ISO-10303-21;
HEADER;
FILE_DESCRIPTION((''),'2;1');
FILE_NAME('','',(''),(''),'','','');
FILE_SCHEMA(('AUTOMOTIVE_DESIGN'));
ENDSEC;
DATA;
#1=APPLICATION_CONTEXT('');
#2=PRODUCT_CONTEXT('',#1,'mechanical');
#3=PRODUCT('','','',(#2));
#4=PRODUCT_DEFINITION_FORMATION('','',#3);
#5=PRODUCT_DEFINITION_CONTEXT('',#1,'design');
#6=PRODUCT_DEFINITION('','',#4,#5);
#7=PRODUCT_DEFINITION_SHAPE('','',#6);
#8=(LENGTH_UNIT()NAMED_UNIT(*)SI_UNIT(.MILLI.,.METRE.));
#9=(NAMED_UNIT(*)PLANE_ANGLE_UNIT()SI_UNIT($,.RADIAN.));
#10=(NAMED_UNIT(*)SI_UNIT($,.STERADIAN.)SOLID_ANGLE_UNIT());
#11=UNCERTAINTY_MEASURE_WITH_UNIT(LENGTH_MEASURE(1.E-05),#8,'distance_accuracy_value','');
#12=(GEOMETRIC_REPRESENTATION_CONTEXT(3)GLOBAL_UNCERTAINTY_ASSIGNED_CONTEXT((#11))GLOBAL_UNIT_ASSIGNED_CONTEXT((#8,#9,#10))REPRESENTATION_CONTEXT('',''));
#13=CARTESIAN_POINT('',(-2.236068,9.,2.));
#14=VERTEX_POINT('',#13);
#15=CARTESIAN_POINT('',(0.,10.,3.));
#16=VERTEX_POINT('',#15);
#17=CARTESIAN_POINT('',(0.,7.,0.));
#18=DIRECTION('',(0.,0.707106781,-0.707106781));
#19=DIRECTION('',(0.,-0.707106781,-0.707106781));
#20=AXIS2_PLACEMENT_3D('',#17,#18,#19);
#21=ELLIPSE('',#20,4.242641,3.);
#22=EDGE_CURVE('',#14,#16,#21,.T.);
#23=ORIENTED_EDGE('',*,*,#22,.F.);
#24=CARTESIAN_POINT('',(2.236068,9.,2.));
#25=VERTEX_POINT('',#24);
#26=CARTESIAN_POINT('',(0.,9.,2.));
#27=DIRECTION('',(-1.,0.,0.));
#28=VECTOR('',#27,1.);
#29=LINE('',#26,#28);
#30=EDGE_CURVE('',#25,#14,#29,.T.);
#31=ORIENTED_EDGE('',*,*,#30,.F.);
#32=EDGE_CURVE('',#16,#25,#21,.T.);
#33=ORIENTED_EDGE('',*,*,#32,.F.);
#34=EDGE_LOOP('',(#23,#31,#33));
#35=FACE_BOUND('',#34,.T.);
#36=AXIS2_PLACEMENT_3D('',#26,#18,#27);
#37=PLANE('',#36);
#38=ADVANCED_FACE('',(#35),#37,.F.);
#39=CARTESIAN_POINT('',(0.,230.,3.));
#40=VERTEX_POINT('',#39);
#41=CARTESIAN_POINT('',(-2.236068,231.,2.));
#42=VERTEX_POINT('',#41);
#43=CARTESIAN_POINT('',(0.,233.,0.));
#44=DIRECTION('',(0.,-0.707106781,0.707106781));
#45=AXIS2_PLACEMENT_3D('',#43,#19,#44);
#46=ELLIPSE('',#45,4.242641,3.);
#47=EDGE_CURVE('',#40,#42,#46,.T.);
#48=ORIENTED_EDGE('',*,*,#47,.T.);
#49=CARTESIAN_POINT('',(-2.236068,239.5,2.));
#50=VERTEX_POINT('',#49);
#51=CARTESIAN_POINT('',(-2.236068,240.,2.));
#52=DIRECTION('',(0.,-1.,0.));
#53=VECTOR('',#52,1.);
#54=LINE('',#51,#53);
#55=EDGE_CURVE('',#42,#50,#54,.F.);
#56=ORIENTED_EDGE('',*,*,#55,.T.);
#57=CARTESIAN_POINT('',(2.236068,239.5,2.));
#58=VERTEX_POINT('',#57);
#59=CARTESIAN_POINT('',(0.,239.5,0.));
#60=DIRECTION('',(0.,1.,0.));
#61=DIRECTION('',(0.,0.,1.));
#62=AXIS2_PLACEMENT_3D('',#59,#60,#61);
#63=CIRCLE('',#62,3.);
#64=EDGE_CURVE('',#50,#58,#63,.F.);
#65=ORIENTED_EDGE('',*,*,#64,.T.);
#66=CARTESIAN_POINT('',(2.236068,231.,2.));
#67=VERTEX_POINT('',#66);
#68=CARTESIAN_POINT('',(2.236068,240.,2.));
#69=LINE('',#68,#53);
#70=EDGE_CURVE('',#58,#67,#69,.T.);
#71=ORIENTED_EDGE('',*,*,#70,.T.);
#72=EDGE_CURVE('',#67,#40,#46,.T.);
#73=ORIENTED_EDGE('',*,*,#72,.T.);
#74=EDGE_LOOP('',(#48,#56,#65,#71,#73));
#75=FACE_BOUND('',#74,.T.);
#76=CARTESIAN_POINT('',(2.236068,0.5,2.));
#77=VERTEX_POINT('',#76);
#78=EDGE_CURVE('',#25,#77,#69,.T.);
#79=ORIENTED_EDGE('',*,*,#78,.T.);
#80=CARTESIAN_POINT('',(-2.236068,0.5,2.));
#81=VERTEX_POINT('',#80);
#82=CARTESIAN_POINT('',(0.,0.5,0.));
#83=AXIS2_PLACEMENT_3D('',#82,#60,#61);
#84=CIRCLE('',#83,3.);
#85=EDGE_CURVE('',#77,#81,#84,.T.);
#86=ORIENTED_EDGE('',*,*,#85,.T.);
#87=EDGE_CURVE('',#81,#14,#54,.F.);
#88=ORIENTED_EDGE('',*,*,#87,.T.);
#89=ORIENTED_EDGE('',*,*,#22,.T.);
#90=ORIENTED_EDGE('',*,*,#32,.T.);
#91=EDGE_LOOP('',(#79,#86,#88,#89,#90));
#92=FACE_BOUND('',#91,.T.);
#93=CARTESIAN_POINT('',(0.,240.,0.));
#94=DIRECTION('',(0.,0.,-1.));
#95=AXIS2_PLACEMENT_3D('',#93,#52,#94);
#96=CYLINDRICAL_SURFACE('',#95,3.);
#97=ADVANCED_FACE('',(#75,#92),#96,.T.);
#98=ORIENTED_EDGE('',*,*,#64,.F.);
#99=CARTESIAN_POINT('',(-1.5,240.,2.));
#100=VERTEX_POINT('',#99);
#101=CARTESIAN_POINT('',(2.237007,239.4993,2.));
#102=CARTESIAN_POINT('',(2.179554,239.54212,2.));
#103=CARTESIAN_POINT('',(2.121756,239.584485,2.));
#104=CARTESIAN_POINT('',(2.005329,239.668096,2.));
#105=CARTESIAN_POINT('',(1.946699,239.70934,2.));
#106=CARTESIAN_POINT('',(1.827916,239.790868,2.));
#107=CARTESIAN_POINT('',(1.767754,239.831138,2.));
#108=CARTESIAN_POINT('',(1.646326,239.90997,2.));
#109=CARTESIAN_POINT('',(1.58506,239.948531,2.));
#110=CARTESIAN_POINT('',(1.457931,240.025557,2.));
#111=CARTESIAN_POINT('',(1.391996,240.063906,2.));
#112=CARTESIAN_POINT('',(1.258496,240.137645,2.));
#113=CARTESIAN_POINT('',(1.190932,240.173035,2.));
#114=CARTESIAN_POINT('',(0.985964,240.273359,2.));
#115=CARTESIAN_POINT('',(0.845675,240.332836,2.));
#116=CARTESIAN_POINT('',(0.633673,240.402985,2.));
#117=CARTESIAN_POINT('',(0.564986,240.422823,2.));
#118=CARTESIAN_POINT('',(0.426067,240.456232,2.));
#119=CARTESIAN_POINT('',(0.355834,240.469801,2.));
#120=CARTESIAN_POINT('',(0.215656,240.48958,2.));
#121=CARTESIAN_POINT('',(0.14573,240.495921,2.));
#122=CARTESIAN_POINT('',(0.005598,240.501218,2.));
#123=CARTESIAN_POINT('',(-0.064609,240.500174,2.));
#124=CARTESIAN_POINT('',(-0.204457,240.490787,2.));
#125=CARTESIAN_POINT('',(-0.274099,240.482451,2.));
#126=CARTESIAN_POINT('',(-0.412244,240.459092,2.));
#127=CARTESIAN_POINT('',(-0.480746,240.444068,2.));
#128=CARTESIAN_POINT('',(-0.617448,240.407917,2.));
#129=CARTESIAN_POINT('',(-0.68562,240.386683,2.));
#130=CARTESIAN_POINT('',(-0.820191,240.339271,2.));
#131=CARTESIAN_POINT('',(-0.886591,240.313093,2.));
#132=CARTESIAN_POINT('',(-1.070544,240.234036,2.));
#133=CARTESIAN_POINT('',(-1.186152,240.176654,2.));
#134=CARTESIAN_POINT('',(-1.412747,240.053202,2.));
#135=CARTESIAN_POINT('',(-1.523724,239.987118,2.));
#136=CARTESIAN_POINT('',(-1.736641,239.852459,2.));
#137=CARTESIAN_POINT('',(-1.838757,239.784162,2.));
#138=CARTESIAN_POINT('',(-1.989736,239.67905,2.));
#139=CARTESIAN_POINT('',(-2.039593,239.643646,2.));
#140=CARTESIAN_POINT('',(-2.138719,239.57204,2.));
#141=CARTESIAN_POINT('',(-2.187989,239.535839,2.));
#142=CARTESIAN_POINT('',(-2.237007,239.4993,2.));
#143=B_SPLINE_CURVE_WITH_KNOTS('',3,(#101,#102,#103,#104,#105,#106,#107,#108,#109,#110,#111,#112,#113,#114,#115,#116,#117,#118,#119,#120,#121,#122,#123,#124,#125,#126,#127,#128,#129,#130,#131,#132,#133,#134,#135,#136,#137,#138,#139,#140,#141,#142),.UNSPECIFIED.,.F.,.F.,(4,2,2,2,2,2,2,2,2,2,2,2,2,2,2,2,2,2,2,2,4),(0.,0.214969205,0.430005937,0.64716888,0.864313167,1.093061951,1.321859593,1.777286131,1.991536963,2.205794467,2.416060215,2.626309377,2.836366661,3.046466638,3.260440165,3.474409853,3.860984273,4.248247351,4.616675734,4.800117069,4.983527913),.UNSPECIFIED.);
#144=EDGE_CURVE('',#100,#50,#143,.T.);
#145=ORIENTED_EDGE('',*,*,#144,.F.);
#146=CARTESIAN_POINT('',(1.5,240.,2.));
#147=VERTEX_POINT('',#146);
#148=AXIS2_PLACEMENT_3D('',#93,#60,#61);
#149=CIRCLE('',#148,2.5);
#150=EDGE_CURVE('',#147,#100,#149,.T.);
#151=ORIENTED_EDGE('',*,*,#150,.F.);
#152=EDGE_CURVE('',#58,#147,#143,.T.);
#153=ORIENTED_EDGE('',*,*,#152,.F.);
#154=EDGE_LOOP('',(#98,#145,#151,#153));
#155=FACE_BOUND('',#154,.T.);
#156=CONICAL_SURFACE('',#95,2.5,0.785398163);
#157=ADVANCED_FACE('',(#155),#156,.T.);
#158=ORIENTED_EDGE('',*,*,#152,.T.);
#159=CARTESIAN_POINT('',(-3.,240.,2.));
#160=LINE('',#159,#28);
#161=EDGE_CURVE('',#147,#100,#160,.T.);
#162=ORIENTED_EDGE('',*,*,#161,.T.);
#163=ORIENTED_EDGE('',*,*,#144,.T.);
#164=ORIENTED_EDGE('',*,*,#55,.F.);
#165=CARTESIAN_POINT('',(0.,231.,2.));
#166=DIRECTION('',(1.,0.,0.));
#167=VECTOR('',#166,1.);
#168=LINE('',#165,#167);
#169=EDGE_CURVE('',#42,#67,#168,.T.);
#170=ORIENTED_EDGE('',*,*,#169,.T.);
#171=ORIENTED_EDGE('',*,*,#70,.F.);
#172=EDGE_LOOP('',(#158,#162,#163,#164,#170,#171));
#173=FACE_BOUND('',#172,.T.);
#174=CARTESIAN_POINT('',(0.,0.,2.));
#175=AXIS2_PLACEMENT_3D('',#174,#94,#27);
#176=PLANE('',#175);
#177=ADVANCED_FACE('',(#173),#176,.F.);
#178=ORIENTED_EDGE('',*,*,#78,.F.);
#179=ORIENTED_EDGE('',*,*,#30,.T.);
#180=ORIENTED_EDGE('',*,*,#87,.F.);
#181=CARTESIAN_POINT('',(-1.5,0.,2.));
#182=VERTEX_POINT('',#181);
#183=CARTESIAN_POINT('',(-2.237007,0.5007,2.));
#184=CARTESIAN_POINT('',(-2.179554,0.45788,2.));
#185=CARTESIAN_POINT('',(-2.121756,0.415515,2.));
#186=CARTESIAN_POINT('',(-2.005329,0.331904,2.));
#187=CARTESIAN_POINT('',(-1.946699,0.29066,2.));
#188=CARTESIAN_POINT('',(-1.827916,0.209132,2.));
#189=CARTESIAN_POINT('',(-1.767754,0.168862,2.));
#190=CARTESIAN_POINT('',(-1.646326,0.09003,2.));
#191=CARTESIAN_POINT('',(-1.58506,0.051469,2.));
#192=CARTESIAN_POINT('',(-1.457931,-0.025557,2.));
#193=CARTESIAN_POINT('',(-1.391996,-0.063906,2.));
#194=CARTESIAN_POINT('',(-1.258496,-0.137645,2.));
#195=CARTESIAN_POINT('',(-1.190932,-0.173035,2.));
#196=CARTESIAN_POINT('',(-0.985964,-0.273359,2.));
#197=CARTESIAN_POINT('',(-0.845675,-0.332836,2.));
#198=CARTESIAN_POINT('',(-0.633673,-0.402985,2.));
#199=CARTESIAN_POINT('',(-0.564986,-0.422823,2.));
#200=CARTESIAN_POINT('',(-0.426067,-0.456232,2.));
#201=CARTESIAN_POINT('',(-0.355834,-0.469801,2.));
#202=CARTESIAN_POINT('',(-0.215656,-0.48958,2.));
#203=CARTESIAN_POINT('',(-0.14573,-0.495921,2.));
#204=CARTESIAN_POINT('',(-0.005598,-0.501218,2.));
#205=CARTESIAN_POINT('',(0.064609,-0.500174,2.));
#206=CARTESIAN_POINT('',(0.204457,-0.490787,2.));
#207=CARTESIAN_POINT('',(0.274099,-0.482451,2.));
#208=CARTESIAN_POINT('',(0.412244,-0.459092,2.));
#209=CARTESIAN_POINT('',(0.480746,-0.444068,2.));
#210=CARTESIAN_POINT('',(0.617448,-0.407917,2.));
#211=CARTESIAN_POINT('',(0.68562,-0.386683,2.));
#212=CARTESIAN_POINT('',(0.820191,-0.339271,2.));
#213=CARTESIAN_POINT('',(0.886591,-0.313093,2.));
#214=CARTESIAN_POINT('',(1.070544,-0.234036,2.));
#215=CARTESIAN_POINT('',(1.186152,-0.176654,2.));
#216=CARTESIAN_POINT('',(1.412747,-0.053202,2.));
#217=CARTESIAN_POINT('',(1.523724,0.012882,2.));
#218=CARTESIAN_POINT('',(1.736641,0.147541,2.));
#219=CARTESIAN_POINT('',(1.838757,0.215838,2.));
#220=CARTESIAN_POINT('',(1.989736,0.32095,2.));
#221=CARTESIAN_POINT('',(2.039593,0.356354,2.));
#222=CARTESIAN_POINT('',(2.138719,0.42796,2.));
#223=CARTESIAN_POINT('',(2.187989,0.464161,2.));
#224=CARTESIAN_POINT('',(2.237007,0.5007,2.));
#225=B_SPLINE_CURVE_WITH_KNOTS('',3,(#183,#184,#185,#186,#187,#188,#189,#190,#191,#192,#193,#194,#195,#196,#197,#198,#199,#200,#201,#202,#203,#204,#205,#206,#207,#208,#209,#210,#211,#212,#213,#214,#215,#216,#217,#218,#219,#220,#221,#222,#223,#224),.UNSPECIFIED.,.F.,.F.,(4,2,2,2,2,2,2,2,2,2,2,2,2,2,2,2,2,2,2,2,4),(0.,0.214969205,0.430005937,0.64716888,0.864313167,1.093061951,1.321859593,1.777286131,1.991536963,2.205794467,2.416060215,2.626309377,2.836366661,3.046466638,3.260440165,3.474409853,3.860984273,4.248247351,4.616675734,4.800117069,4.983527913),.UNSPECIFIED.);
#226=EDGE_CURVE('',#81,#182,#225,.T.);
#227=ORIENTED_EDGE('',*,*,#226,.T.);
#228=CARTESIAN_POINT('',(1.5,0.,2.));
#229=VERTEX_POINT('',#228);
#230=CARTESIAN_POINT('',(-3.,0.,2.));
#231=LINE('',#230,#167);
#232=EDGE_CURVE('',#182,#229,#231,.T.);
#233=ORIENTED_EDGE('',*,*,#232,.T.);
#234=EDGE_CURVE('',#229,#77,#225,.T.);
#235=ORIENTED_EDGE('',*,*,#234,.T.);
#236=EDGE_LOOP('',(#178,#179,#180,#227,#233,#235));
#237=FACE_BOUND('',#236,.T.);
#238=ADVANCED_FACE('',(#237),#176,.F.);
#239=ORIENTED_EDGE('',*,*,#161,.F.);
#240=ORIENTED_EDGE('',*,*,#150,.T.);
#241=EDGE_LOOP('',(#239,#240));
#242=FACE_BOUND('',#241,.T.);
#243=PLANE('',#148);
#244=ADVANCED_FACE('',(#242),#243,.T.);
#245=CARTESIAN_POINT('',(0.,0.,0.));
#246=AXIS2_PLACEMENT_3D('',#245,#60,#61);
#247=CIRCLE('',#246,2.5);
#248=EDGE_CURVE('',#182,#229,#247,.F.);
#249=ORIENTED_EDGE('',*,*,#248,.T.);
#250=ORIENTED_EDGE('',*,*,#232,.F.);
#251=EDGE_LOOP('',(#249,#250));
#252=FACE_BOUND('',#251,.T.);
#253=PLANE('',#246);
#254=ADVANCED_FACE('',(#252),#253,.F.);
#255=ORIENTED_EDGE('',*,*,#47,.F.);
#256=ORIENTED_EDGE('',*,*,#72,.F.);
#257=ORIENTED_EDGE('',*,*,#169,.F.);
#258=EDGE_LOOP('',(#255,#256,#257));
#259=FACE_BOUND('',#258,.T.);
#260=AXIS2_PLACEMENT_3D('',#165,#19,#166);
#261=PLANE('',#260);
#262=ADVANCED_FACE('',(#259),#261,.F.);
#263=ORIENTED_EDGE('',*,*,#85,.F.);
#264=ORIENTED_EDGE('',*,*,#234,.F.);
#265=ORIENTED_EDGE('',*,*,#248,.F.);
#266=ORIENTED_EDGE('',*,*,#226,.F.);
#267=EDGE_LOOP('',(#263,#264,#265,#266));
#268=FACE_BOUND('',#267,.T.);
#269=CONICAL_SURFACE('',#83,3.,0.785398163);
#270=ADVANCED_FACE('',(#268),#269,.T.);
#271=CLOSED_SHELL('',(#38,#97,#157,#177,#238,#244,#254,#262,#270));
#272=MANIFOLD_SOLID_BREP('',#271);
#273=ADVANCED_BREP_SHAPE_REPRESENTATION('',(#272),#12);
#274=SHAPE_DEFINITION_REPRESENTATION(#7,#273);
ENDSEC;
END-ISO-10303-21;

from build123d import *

# Parameters (mm, degrees)
SKIZZE1_R                       = 3
AUFSATZ_LINEAR_AUSTRAGEN1_DEPTH = 240
FASE2_SIZE                      = 0.5
SCHNITT_LINEAR_START            = 2
SKIZZE2_W                       = 6
SKIZZE2_H                       = 10
SCHNITT_LINEAR_AUSTRAGEN1_DEPTH = 239.037497071
FASE1_SIZE                      = 1


with BuildPart() as part:
    # Skizze1 → Aufsatz-Linear austragen1 (new body)
    with BuildSketch(Plane(origin=(0, 0, 0), x_dir=(1, 0, 0), z_dir=(0, 1, 0))):
        with Locations(Location((0, 0, 0), (0, 0, 270))):
            Circle(SKIZZE1_R)
    extrude(amount=AUFSATZ_LINEAR_AUSTRAGEN1_DEPTH)

    # Fase2
    fase2_edges = [part.edges().sort_by_distance(p)[0] for p in [
        (0, 0, -3),
        (0, 240, -3),
    ]]
    chamfer(fase2_edges, length=FASE2_SIZE)

    # Skizze2 → Schnitt-Linear austragen1 (cut, through all)
    with BuildSketch(Plane.XY.offset(SCHNITT_LINEAR_START)):
        with Locations((0, 235)):
            Rectangle(SKIZZE2_W, SKIZZE2_H)
        with Locations((0, 5)):
            Rectangle(SKIZZE2_W, SKIZZE2_H)
    extrude(amount=SCHNITT_LINEAR_AUSTRAGEN1_DEPTH, mode=Mode.SUBTRACT)

    # Fase1
    fase1_edges = [part.edges().sort_by_distance(p)[0] for p in [
        (0, 230, 2),
        (0, 10, 2),
    ]]
    chamfer(fase1_edges, length=FASE1_SIZE - 0.0001)  # a hair under: the kernel refuses the full size


solid = part.part
